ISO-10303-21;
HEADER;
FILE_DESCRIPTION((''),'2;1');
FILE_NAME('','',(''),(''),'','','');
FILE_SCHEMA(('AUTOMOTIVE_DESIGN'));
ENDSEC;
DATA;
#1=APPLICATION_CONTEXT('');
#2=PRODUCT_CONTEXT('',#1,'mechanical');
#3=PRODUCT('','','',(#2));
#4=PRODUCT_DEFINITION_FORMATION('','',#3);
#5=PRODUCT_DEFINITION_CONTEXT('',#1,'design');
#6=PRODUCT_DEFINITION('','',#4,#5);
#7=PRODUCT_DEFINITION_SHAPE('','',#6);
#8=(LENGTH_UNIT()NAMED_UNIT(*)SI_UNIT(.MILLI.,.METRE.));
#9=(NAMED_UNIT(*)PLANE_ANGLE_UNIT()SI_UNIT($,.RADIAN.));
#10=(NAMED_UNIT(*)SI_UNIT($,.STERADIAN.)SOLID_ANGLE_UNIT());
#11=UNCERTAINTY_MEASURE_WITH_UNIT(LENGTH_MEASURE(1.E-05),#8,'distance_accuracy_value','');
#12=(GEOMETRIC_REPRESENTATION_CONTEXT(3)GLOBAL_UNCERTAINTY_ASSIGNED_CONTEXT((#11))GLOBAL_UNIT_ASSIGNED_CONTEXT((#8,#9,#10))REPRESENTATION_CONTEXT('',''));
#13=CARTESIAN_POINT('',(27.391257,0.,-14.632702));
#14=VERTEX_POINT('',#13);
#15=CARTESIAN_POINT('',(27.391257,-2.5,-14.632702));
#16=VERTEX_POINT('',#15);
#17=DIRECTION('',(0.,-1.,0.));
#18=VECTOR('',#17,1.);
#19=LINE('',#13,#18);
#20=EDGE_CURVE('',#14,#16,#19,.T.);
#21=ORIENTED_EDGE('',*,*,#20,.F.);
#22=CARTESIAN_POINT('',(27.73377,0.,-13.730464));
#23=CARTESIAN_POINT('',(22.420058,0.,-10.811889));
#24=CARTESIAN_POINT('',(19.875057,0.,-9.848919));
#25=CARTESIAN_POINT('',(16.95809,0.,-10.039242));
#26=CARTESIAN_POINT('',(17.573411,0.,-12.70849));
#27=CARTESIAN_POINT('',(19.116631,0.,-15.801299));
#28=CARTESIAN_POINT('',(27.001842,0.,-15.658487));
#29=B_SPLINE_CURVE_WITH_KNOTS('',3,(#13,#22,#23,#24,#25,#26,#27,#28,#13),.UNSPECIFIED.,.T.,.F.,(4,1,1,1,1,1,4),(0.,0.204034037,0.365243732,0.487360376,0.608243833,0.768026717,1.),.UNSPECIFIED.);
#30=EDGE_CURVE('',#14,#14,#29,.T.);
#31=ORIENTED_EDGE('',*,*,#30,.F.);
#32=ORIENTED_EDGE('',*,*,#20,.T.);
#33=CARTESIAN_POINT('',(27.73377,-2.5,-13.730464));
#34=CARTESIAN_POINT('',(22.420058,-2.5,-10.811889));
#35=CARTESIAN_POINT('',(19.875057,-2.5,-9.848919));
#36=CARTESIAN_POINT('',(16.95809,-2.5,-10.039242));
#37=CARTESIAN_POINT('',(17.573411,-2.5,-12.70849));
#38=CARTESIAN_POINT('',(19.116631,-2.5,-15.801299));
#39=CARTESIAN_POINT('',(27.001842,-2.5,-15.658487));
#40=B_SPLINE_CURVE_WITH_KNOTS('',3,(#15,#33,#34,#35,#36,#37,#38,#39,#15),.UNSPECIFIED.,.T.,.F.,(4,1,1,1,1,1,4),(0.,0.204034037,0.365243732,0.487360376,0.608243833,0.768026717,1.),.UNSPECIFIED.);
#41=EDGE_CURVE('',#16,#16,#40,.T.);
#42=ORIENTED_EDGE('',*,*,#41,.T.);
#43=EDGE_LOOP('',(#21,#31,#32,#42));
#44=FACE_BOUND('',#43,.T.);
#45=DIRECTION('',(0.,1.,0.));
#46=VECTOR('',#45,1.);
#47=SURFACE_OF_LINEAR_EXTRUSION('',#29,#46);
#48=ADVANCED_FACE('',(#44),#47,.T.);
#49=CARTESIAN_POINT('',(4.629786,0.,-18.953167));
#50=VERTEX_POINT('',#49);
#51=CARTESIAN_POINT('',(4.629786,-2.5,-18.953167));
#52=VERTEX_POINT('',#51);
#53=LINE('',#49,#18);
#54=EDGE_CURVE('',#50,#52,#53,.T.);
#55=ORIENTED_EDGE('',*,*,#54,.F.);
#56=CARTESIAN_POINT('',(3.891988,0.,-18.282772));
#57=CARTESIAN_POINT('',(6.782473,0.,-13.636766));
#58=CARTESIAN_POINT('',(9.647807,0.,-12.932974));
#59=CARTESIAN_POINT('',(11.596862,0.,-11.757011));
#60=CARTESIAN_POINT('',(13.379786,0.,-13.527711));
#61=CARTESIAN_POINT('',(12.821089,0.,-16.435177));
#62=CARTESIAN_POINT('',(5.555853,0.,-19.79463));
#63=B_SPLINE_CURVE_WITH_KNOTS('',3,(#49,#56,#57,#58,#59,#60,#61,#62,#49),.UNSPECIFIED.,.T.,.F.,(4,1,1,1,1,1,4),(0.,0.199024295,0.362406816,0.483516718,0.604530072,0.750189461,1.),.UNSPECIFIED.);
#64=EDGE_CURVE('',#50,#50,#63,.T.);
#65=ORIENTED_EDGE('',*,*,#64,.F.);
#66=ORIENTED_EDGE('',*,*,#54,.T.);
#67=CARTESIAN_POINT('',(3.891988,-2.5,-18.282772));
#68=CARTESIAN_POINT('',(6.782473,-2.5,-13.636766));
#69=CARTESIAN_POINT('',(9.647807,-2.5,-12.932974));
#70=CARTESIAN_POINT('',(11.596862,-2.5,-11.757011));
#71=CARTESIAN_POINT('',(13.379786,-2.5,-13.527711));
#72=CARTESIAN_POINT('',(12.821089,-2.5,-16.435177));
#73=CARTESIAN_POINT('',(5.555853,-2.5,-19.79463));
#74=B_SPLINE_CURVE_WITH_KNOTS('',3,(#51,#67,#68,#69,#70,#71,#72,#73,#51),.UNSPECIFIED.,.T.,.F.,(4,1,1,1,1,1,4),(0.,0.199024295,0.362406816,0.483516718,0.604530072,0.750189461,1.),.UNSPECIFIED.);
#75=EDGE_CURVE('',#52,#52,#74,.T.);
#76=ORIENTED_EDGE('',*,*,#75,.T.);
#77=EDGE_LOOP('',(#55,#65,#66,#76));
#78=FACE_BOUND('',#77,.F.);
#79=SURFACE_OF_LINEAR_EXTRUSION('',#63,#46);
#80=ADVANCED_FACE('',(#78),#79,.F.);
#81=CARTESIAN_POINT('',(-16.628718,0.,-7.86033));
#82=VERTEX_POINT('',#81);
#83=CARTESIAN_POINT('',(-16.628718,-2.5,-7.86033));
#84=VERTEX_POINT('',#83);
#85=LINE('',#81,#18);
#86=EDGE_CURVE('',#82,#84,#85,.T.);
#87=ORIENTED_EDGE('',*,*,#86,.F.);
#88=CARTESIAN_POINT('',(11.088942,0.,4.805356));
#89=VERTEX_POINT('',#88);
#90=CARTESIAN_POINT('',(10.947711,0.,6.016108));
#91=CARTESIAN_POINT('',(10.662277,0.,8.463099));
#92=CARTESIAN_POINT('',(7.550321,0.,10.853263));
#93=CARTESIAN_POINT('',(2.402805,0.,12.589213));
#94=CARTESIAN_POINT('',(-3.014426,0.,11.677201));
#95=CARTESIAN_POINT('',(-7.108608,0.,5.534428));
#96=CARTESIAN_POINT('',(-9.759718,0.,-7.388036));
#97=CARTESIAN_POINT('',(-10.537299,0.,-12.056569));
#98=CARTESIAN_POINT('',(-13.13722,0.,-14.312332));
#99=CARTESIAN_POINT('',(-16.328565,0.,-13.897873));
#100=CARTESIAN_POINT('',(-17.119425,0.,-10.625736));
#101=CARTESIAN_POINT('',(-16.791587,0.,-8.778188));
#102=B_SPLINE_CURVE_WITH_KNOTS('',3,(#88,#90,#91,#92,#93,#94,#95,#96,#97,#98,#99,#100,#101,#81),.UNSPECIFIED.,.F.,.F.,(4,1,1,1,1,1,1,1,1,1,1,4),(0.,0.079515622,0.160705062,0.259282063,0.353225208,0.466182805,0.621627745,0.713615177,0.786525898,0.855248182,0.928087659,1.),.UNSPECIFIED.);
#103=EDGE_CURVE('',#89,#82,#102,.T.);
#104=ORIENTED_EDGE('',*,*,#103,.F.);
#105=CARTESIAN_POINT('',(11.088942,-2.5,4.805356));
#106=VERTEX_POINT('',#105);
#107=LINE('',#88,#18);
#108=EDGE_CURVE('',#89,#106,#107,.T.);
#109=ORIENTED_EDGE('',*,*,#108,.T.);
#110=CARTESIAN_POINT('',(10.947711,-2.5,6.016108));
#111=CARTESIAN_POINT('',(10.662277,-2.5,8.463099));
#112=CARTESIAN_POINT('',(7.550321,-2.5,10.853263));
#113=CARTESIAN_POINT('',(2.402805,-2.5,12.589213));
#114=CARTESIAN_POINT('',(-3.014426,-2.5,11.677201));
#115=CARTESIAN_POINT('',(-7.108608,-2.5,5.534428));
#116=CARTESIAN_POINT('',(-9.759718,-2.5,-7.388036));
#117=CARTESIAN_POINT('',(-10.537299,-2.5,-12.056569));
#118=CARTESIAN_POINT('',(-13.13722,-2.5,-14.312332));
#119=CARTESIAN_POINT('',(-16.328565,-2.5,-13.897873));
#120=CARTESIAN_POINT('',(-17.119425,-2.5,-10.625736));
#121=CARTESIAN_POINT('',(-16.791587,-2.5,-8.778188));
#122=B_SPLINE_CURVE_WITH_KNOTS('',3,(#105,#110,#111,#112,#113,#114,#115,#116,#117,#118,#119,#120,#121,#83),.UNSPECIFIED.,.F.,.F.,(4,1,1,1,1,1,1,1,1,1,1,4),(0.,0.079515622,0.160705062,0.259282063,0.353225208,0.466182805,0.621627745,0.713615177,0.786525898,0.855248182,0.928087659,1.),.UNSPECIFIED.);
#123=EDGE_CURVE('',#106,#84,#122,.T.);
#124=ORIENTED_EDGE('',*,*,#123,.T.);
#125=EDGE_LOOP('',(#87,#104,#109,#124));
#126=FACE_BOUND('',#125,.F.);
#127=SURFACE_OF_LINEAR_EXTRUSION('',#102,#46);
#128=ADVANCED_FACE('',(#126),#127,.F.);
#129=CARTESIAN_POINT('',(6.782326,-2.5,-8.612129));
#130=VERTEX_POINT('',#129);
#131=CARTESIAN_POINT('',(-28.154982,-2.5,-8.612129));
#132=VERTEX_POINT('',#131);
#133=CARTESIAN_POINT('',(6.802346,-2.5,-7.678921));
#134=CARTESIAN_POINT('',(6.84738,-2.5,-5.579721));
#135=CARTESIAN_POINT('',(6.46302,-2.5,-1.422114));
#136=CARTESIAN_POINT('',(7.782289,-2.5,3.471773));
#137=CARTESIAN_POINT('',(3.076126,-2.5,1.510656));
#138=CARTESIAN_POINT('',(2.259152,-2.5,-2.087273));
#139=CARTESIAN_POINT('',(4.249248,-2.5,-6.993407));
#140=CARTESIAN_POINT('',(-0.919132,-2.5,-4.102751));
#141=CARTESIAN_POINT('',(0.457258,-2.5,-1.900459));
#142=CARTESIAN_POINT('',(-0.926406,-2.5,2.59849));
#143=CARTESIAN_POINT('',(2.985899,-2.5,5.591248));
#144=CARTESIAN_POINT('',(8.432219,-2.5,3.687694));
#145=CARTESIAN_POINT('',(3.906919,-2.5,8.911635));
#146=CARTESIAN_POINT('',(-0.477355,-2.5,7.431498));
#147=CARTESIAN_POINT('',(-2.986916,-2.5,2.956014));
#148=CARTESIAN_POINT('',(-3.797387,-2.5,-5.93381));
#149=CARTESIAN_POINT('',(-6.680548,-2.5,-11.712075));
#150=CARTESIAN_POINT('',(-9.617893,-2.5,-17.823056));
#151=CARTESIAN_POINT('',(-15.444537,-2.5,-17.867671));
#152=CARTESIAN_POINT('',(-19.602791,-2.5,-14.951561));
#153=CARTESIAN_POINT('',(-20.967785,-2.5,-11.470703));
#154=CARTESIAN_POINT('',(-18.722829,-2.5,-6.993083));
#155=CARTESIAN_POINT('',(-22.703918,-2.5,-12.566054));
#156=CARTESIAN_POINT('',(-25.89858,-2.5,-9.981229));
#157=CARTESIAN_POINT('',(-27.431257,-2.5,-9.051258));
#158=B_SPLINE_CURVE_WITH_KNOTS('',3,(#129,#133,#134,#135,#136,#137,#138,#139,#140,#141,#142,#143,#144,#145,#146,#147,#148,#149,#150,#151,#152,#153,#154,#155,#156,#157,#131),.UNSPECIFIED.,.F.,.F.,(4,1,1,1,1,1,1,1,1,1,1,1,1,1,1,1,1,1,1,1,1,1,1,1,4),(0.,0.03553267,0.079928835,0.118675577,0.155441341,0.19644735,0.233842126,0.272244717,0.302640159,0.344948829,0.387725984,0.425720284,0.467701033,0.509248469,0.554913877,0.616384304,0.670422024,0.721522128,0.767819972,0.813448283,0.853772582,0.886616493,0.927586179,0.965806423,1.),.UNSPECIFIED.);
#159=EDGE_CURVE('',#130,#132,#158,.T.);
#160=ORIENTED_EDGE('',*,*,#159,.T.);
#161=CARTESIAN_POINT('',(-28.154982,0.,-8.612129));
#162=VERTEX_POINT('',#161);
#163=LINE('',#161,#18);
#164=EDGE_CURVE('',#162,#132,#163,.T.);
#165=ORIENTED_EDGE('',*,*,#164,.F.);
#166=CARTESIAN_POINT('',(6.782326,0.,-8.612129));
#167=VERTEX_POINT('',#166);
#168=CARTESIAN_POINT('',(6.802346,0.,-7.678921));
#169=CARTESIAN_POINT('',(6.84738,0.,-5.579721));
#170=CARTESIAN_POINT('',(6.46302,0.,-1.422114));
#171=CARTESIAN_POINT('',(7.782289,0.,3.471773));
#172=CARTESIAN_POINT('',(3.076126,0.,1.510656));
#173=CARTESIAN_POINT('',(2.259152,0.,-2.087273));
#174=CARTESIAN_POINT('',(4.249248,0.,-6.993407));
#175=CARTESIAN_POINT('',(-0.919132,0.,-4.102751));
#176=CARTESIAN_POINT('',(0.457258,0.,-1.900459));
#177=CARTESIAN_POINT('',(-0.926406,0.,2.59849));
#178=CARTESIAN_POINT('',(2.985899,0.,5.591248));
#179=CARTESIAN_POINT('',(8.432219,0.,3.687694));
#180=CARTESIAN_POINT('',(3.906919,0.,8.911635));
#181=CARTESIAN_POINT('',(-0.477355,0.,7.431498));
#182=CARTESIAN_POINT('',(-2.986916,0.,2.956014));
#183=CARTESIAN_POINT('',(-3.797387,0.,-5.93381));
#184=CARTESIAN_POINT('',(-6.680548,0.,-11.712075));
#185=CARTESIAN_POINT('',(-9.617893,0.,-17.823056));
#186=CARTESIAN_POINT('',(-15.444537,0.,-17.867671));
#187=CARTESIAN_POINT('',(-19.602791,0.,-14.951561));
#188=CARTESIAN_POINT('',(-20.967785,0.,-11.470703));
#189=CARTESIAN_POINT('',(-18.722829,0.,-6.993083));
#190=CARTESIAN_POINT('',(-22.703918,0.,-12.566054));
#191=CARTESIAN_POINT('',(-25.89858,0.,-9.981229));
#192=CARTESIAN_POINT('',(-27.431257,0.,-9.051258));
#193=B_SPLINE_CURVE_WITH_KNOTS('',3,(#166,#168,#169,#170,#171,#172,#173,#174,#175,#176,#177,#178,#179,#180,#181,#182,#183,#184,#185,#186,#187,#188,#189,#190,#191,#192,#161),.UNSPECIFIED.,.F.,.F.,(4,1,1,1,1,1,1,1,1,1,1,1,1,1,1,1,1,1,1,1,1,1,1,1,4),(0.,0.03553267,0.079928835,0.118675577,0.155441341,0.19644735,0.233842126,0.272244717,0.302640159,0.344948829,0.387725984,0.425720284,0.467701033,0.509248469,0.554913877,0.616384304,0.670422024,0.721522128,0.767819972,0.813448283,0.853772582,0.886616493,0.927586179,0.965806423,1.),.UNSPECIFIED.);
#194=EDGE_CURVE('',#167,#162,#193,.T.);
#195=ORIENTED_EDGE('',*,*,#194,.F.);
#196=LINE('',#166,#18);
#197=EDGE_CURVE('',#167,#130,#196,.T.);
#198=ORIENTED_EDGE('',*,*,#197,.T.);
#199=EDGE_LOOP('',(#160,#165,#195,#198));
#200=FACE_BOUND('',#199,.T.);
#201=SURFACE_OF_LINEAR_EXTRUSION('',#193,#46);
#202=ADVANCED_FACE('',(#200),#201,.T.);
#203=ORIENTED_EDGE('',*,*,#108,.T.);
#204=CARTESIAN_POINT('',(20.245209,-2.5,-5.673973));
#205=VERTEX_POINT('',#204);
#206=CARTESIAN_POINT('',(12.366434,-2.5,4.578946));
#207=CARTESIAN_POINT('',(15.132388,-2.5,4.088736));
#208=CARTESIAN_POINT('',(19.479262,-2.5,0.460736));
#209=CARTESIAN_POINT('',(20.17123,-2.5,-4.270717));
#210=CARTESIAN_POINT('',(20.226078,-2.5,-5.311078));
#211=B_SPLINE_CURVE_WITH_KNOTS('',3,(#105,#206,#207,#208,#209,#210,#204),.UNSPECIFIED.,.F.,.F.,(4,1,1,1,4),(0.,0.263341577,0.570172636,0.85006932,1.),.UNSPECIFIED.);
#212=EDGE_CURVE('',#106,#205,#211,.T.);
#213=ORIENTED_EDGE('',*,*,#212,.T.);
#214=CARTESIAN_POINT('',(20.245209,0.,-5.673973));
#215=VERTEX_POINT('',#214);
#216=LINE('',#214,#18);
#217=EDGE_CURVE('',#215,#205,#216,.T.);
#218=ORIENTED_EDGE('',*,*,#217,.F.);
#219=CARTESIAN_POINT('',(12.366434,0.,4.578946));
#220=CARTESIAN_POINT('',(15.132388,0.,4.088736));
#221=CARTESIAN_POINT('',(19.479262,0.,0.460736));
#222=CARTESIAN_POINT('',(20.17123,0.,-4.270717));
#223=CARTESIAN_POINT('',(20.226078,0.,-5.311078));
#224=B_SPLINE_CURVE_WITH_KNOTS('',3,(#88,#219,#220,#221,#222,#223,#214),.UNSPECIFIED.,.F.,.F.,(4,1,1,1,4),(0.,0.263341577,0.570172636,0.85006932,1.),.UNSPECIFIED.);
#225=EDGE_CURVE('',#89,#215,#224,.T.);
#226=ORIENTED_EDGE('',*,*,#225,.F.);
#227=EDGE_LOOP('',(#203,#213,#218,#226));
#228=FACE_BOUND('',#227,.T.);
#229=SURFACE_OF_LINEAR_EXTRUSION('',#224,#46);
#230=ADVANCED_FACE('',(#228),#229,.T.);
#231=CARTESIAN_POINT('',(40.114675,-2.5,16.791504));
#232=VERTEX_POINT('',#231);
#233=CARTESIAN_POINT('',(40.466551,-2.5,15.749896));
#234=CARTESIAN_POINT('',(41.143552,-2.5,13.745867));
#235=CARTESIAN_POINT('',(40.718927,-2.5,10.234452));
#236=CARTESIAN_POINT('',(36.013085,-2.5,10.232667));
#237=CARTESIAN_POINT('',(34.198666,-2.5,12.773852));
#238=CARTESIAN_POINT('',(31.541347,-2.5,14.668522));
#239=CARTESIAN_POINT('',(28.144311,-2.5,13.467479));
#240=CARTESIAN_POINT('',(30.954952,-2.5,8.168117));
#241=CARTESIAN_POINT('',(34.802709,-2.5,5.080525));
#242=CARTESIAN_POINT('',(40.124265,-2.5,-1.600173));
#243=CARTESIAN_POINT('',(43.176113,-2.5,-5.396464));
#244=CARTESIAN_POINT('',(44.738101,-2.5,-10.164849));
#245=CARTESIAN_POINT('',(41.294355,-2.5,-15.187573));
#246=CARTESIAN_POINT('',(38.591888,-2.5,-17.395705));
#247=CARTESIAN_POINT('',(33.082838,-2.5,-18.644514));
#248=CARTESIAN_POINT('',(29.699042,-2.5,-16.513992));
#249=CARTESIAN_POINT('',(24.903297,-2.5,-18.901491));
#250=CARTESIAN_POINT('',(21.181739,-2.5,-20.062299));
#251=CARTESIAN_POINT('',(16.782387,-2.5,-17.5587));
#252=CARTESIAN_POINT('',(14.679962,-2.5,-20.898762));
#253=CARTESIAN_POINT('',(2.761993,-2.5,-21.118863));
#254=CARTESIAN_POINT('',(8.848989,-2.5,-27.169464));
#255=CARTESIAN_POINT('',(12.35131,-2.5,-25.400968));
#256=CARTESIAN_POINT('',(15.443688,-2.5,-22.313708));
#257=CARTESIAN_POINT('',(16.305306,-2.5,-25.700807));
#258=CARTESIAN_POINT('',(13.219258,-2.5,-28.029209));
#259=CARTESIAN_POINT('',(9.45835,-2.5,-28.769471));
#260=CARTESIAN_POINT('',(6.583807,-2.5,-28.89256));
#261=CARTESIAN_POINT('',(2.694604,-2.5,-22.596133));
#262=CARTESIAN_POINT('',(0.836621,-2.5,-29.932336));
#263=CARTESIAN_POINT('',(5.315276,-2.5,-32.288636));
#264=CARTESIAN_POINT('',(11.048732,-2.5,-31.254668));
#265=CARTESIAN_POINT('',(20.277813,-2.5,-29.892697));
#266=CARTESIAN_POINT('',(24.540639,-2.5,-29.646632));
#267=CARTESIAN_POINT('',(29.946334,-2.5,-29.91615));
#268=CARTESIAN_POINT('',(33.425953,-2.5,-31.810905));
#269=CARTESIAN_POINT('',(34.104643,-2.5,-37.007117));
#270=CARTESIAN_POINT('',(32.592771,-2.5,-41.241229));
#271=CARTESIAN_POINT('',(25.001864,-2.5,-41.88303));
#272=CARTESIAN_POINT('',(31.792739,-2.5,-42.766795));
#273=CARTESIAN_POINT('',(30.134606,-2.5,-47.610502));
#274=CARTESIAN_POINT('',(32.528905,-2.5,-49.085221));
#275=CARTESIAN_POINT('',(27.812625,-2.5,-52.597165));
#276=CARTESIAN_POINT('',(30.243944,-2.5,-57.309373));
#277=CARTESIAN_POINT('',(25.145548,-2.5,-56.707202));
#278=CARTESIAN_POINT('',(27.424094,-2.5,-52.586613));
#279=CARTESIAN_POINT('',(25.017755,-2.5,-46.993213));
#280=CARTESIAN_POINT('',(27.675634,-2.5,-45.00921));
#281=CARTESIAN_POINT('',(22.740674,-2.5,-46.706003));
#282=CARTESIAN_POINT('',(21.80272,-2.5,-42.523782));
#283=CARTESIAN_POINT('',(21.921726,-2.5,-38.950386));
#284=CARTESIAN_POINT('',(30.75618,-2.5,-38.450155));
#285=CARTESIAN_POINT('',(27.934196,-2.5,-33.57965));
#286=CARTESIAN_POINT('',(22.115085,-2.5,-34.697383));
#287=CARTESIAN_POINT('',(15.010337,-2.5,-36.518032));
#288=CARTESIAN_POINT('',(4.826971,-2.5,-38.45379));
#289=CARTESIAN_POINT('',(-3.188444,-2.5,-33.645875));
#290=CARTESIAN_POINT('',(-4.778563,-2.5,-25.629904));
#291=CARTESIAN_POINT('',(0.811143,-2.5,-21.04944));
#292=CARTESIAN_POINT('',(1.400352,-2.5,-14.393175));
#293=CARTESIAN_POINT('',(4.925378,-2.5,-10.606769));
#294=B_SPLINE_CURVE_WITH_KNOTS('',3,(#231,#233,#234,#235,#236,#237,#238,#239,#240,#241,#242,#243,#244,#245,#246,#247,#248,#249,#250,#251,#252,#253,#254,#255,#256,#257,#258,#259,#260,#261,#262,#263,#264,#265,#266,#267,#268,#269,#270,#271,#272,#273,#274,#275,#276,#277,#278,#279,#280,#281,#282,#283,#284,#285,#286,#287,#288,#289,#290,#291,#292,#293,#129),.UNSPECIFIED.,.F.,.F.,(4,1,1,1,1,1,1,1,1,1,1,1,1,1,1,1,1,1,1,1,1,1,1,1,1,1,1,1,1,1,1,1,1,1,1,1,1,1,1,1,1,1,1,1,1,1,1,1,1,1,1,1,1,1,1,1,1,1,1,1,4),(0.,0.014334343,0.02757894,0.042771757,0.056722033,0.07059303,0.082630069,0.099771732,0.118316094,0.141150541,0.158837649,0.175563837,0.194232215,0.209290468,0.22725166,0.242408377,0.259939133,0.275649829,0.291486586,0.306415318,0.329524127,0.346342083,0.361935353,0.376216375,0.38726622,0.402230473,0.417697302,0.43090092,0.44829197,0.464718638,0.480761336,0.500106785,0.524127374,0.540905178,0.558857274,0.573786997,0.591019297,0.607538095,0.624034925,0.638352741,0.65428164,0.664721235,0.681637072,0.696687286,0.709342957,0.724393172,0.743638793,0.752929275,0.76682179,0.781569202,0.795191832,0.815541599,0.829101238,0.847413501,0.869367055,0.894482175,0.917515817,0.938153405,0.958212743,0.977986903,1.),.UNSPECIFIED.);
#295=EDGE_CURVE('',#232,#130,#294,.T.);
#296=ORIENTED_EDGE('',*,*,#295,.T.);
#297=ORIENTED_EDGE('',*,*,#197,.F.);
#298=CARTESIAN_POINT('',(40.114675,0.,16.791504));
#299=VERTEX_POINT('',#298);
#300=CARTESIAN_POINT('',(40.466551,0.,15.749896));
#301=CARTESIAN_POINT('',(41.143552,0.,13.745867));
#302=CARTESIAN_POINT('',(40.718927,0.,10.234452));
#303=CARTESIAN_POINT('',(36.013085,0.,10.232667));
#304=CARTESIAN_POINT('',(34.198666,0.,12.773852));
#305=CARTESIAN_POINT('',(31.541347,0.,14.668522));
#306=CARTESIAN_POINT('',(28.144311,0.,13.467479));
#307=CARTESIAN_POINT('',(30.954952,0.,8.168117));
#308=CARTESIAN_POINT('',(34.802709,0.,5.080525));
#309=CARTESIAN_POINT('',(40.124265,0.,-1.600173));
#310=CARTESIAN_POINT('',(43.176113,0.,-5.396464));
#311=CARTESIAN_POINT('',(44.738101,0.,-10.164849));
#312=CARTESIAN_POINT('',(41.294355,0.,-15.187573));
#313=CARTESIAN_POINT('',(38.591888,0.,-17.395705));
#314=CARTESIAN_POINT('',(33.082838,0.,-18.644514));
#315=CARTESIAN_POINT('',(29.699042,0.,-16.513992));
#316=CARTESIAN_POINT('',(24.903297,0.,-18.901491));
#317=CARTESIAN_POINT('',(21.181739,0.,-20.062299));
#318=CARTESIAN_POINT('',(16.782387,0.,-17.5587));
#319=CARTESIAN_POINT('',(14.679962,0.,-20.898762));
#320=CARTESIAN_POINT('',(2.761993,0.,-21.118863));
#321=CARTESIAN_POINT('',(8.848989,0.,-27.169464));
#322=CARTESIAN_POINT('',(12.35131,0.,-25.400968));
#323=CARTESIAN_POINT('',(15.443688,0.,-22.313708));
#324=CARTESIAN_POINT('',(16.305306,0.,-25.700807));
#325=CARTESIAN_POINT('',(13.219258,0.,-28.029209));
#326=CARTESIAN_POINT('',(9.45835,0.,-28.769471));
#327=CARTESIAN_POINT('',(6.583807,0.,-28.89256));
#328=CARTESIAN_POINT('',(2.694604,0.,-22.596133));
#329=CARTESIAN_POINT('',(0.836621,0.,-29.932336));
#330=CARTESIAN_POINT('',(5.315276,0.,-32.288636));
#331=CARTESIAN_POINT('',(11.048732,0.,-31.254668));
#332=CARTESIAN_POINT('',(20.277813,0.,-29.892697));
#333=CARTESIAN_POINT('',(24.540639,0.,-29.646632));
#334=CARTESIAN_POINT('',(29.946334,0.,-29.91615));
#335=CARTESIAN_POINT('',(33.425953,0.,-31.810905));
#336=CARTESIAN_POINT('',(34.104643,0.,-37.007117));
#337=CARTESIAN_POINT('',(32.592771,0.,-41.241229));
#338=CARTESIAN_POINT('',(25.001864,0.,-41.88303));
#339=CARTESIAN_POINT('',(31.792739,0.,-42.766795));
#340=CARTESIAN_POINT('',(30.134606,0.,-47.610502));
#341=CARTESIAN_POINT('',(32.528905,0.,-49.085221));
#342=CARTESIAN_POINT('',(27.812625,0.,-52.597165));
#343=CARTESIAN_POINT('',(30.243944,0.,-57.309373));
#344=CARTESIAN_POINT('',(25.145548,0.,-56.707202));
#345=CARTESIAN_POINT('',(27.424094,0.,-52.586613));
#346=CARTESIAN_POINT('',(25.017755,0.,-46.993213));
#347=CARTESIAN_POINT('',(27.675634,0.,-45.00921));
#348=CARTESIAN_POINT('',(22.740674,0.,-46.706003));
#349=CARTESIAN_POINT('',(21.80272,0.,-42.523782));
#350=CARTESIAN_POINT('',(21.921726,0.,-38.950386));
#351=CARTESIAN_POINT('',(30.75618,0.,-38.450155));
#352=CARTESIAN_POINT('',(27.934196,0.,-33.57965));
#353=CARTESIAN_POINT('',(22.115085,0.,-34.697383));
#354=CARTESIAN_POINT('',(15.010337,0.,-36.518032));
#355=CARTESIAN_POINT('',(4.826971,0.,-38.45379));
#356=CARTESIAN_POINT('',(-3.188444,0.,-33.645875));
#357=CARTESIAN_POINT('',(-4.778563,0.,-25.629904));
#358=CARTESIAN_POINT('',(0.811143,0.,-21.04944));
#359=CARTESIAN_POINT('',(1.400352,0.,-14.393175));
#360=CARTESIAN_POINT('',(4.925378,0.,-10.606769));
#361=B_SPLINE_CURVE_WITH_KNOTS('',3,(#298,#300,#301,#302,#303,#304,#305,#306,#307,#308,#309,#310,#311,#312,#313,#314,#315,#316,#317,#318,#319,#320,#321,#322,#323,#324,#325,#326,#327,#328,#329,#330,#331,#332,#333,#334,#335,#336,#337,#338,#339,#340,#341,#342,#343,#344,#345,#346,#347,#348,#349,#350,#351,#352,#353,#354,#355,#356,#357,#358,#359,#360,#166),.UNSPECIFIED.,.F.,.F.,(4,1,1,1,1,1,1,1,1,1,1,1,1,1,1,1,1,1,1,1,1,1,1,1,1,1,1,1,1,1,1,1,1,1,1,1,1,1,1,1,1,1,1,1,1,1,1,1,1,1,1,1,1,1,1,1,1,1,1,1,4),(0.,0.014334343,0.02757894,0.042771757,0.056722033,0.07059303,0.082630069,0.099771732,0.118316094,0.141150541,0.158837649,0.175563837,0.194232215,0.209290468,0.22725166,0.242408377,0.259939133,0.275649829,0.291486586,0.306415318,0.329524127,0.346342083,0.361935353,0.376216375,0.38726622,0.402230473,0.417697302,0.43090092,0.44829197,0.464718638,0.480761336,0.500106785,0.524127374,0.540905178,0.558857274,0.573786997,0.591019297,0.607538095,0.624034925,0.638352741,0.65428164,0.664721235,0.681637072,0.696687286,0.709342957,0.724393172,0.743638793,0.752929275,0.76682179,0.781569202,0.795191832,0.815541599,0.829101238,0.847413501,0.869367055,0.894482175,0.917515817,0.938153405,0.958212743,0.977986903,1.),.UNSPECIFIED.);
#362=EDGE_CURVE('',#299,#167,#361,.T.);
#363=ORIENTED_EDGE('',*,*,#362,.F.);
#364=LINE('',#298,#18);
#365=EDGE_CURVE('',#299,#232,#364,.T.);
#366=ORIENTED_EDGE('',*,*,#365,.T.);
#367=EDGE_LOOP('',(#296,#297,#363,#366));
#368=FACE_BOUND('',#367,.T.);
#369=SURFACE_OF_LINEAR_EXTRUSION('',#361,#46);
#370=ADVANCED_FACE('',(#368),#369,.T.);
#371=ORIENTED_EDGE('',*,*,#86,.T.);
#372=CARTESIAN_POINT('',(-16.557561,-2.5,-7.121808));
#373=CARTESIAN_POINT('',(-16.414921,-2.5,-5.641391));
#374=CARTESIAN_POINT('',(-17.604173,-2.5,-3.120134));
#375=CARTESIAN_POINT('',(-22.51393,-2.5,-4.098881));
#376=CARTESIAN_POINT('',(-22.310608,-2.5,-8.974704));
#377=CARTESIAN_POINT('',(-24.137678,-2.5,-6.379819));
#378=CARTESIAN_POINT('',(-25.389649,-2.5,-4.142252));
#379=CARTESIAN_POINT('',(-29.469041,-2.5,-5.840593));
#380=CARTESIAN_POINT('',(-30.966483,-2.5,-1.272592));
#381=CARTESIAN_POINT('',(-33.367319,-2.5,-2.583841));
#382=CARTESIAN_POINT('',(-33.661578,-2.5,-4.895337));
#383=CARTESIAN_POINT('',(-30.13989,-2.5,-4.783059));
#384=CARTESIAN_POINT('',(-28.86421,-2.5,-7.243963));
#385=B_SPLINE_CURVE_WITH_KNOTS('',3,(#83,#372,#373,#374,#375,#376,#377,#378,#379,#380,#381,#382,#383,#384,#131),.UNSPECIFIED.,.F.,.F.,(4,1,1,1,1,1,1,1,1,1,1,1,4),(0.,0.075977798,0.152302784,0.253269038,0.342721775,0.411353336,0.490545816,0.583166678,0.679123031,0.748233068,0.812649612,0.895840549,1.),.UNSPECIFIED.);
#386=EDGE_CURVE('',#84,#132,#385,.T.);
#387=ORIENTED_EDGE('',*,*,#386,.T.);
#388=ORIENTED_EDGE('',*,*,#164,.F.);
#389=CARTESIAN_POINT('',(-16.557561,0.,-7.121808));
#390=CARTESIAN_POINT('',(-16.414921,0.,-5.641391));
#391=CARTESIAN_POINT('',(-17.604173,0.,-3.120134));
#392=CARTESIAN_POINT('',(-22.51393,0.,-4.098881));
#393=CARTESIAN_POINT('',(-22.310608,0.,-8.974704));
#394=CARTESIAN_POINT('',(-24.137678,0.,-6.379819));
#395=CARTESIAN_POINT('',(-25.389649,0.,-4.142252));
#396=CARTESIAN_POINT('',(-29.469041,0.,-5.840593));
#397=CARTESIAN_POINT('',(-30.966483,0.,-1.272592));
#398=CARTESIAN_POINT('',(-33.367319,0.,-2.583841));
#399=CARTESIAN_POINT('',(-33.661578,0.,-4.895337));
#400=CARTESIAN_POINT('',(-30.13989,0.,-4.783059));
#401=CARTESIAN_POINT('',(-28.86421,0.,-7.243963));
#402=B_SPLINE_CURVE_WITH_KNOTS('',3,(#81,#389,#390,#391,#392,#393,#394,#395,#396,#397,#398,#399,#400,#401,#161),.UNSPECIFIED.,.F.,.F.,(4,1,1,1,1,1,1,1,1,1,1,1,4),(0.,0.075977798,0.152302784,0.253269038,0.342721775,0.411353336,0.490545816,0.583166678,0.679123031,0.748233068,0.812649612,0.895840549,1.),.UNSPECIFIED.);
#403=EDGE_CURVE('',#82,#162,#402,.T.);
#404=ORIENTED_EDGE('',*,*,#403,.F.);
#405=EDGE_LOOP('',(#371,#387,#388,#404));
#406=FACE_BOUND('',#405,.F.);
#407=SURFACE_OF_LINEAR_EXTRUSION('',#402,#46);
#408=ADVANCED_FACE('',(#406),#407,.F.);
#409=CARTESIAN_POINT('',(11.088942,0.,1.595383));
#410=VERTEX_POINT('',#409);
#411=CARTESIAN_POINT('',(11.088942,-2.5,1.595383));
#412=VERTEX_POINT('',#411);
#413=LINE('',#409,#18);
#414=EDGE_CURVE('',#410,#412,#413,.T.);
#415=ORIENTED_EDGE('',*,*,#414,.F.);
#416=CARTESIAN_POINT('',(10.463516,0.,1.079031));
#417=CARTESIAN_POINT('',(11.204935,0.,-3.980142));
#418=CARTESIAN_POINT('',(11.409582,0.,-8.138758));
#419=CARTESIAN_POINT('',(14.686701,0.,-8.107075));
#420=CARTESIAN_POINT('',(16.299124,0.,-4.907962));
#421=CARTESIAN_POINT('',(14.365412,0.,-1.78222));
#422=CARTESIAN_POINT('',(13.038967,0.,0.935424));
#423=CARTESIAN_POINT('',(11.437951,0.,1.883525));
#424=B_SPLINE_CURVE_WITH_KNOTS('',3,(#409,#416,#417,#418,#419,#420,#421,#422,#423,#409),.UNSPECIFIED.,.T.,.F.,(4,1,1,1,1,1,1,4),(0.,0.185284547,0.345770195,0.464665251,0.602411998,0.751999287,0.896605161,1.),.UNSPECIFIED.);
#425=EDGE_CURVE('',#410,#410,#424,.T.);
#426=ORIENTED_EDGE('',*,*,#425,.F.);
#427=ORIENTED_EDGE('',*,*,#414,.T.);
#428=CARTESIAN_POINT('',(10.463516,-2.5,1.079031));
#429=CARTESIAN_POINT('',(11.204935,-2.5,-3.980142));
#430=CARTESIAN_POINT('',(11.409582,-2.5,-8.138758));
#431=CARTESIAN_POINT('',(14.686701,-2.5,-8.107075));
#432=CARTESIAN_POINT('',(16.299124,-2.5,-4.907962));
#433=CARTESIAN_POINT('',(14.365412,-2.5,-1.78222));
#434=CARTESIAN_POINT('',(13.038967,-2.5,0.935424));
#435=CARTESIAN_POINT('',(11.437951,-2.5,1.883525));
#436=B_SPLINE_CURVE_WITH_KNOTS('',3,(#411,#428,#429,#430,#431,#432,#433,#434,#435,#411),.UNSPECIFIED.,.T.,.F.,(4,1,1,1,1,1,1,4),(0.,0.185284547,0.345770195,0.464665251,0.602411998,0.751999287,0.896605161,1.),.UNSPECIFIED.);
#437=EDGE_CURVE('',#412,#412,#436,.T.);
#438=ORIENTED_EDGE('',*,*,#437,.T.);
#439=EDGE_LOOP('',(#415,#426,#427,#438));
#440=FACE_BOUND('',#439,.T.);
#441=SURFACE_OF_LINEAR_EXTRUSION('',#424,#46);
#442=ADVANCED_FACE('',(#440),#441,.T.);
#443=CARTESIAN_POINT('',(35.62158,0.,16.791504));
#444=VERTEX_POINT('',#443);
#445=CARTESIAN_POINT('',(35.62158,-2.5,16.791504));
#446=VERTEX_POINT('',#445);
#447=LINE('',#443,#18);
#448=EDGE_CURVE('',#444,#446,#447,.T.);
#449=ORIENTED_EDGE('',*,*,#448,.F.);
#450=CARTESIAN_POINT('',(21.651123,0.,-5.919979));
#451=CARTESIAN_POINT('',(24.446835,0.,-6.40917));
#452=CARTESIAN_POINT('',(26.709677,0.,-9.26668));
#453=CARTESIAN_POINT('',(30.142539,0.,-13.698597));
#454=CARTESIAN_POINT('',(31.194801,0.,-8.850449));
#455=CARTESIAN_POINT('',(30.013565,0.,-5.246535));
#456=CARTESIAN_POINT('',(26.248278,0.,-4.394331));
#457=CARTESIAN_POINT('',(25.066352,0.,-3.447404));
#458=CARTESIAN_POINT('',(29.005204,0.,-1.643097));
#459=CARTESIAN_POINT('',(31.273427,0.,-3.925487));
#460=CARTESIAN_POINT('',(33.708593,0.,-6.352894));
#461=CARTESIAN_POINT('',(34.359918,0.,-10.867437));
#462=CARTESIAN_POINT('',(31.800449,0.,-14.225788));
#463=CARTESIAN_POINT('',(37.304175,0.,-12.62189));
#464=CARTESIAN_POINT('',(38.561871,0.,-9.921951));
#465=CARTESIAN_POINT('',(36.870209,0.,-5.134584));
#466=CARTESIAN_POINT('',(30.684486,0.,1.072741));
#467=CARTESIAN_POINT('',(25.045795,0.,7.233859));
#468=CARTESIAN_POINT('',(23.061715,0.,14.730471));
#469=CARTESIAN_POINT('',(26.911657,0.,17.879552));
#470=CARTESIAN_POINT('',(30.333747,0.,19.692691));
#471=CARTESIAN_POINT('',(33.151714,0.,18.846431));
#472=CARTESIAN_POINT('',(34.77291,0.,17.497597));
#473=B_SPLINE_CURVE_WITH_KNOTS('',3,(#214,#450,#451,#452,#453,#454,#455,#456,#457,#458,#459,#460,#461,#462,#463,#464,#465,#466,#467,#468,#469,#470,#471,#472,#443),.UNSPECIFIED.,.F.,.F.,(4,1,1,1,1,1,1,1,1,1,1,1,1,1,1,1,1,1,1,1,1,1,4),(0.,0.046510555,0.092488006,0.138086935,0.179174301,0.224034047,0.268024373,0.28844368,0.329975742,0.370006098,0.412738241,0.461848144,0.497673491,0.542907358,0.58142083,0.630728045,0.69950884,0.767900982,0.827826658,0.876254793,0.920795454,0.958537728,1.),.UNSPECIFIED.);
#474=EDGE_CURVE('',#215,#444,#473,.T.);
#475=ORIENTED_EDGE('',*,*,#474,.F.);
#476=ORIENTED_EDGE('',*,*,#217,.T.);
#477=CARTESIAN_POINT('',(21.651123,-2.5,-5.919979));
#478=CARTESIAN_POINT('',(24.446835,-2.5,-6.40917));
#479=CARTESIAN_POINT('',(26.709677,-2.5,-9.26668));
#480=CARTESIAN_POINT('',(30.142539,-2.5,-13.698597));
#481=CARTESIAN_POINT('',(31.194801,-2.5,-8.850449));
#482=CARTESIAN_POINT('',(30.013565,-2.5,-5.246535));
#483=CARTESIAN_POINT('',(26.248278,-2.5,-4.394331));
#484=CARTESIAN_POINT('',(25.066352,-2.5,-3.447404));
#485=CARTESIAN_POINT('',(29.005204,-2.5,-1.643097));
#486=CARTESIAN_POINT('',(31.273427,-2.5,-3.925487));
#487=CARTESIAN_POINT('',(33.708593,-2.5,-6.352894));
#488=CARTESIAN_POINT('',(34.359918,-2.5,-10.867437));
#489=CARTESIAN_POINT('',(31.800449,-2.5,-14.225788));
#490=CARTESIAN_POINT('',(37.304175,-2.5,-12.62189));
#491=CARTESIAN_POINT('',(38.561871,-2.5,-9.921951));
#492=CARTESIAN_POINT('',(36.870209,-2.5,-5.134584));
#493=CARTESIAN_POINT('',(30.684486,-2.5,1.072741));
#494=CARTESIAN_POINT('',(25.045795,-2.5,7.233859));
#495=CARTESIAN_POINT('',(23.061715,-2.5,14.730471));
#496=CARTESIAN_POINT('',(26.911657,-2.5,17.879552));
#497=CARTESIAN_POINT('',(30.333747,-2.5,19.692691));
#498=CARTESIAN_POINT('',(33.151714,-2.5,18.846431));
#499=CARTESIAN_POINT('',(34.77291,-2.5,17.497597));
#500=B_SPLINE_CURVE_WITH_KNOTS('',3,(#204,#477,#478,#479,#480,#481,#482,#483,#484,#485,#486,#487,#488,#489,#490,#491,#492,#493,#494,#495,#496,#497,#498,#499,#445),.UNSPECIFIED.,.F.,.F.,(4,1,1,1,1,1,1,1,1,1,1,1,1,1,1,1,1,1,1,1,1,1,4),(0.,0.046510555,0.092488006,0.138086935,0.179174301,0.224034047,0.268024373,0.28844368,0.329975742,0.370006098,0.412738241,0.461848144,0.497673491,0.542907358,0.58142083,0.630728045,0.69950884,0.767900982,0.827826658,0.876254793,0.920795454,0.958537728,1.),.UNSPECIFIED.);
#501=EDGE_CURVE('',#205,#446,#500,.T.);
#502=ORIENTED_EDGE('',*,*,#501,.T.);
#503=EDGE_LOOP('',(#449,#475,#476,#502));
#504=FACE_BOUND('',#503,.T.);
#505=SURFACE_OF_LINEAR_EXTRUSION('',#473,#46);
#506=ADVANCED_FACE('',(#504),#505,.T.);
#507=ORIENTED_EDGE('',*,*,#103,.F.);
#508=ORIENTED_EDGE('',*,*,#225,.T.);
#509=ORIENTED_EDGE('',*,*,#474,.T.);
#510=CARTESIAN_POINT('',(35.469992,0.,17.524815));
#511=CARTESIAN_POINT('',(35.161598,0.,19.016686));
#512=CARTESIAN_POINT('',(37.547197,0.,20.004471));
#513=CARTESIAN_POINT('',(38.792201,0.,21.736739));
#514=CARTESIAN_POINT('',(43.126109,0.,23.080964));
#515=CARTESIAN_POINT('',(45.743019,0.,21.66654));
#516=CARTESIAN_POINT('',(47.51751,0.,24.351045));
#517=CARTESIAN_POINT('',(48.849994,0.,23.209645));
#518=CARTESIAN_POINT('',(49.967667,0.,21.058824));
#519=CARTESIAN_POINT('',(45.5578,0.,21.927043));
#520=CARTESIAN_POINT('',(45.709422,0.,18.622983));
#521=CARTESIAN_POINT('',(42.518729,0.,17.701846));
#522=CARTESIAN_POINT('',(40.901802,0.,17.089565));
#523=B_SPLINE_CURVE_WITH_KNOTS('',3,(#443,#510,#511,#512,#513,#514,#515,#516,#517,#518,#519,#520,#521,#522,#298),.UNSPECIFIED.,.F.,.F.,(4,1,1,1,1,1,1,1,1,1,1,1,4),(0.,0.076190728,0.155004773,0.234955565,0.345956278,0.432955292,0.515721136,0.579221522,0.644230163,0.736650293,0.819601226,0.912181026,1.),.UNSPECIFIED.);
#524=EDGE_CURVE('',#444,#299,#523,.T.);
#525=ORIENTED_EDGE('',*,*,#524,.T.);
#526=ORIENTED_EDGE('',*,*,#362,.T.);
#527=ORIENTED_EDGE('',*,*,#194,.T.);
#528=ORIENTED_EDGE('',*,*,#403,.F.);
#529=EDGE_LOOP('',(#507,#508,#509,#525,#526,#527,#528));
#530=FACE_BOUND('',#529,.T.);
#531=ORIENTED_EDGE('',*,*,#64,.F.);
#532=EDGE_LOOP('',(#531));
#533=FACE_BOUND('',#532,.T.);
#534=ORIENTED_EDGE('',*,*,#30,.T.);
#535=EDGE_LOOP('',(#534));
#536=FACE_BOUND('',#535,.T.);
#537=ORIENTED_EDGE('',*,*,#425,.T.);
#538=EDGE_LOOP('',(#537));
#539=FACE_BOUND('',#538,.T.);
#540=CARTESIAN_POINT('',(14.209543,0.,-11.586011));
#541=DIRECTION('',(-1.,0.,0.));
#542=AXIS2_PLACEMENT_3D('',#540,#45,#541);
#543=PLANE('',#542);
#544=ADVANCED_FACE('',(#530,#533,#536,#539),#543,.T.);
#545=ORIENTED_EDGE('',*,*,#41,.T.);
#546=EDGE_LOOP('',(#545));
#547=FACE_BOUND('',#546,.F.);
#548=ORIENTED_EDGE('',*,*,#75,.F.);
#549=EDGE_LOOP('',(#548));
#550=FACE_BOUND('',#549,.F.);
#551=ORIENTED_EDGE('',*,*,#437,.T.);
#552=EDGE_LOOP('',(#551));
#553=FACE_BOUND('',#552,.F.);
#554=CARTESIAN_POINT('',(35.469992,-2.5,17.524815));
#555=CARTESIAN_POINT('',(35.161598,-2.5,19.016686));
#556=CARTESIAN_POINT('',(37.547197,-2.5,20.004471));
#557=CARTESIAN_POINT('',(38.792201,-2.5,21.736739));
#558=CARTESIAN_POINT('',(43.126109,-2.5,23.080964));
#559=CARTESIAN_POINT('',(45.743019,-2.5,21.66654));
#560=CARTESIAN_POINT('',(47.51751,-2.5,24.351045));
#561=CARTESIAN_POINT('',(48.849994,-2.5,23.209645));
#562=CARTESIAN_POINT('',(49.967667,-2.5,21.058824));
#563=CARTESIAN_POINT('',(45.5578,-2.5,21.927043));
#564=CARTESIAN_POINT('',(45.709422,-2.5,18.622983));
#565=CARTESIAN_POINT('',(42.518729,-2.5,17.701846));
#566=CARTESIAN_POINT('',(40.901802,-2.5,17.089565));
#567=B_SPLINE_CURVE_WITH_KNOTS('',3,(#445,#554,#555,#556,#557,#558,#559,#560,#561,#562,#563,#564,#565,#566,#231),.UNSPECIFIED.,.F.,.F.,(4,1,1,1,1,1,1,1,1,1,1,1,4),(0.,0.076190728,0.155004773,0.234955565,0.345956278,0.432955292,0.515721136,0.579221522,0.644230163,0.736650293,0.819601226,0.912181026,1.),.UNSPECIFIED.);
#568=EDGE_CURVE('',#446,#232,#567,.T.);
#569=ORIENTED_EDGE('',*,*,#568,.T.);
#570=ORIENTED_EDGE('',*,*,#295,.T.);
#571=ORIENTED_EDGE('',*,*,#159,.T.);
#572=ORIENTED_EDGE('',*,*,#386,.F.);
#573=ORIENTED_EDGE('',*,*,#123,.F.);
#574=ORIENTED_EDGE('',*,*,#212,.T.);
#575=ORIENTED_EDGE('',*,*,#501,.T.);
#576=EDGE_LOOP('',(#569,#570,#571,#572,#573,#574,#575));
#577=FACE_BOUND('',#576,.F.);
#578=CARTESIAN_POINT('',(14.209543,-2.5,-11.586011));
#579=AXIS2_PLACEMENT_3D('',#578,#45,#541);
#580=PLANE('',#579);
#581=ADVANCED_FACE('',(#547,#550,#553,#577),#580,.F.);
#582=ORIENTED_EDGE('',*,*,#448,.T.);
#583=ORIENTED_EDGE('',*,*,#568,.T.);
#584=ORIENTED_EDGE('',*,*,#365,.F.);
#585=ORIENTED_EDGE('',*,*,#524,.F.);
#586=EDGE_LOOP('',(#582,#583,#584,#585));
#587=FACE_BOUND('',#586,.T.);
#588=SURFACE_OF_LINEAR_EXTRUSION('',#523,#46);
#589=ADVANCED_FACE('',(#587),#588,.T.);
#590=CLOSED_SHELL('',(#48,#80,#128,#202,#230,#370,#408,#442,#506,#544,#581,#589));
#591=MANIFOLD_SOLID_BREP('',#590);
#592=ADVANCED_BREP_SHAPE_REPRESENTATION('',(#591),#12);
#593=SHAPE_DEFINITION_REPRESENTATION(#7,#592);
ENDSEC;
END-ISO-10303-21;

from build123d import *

# Parameters (mm, degrees)
F1_DEPTH = 2.5


with BuildPart() as f1:
    # F0 (on Front) → F1 (new body)
    with BuildSketch(Plane.XZ):
        with BuildLine():
            add(Edge.make_bspline(
                [(11.0889421776, 4.8053557985), (12.3664336611, 4.5789460208), (15.1323876511, 4.0887360773), (19.4792620619, 0.4607355169), (20.1712301772, -4.2707165664), (20.2260776558, -5.3110784429), (20.2452093363, -5.6739733554)],
                knots=[0, 0, 0, 0, 0.2633415775, 0.5701726363, 0.85006932, 1, 1, 1, 1], degree=3))
            add(Edge.make_bspline(
                [(11.0889421776, 4.8053557985), (10.9477114895, 6.0161080856), (10.6622771824, 8.4630992095), (7.5503208691, 10.8532625541), (2.4028051008, 12.5892131079), (-3.0144256065, 11.6772013784), (-7.1086081438, 5.5344278812), (-9.759717957, -7.3880363716), (-10.5372986967, -12.0565687383), (-13.1372199176, -14.3123320751), (-16.3285648842, -13.8978725755), (-17.1194246281, -10.625736306), (-16.7915869436, -8.7781875333), (-16.6287180036, -7.8603299335)],
                knots=[0, 0, 0, 0, 0.0795156219, 0.1607050617, 0.259282063, 0.3532252078, 0.4661828047, 0.6216277449, 0.7136151768, 0.7865258985, 0.8552481816, 0.9280876594, 1, 1, 1, 1], degree=3))
            add(Edge.make_bspline(
                [(-16.6287180036, -7.8603299335), (-16.5575606891, -7.1218084113), (-16.4149208991, -5.641390615), (-17.6041733535, -3.1201341795), (-22.513929949, -4.0988811412), (-22.3106075687, -8.9747043691), (-24.1376775807, -6.3798194605), (-25.389649227, -4.1422524297), (-29.4690409033, -5.8405928958), (-30.9664831344, -1.2725924402), (-33.3673187941, -2.583840604), (-33.6615781217, -4.8953370561), (-30.1398896289, -4.7830591729), (-28.8642099879, -7.243963074), (-28.1549822539, -8.612128906)],
                knots=[0, 0, 0, 0, 0.0759777977, 0.1523027839, 0.2532690375, 0.3427217753, 0.4113533356, 0.4905458161, 0.5831666784, 0.6791230306, 0.7482330679, 0.8126496123, 0.8958405491, 1, 1, 1, 1], degree=3))
            add(Edge.make_bspline(
                [(6.7823263817, -8.612128906), (6.8023463174, -7.6789212934), (6.8473800891, -5.5797208158), (6.4630197472, -1.4221142412), (7.7822890094, 3.471772956), (3.0761255876, 1.5106559717), (2.2591516242, -2.0872726175), (4.2492475431, -6.9934071521), (-0.9191321523, -4.1027508056), (0.4572576605, -1.9004592961), (-0.9264058685, 2.5984899734), (2.9858987401, 5.5912476588), (8.4322187338, 3.6876943929), (3.9069192717, 8.9116353995), (-0.4773551425, 7.4314984902), (-2.9869160352, 2.9560144756), (-3.7973868662, -5.9338096084), (-6.6805479463, -11.7120751903), (-9.6178927465, -17.8230555193), (-15.4445370698, -17.8676705477), (-19.6027912562, -14.9515606696), (-20.9677851586, -11.4707032937), (-18.7228290433, -6.9930832081), (-22.7039184604, -12.5660537681), (-25.8985798616, -9.9812289008), (-27.4312569811, -9.0512581458), (-28.1549822539, -8.612128906)],
                knots=[0, 0, 0, 0, 0.0355326697, 0.079928835, 0.1186755767, 0.1554413406, 0.1964473498, 0.2338421257, 0.2722447166, 0.3026401594, 0.3449488292, 0.3877259838, 0.4257202836, 0.4677010331, 0.5092484687, 0.554913877, 0.6163843036, 0.6704220242, 0.7215221279, 0.7678199717, 0.813448283, 0.8537725824, 0.8866164929, 0.9275861785, 0.9658064232, 1, 1, 1, 1], degree=3))
            add(Edge.make_bspline(
                [(40.1146747172, 16.7915038764), (40.4665507483, 15.7498959021), (41.1435519888, 13.745866561), (40.7189266585, 10.2344518158), (36.0130852525, 10.2326672231), (34.1986657339, 12.7738521997), (31.5413470961, 14.668522316), (28.1443108678, 13.4674789763), (30.9549521177, 8.1681167244), (34.8027089366, 5.0805254069), (40.124265207, -1.6001734888), (43.1761127371, -5.3964638729), (44.7381007749, -10.1648487415), (41.2943552054, -15.1875730535), (38.5918875439, -17.3957049024), (33.0828380013, -18.6445140842), (29.699042011, -16.5139924018), (24.9032970573, -18.9014914618), (21.1817394065, -20.0622987505), (16.7823866144, -17.5587003839), (14.6799623091, -20.8987623196), (2.7619930002, -21.1188631764), (8.8489886462, -27.1694642808), (12.3513095758, -25.4009682523), (15.4436882616, -22.3137079746), (16.3053064191, -25.7008071602), (13.2192577468, -28.0292088882), (9.4583495005, -28.7694708273), (6.5838065607, -28.8925602668), (2.694604328, -22.5961328405), (0.836620942, -29.9323358798), (5.315275849, -32.2886359905), (11.0487315026, -31.254668193), (20.2778131565, -29.8926966593), (24.5406386911, -29.6466323225), (29.9463342612, -29.9161495364), (33.4259529643, -31.8109051914), (34.1046432191, -37.0071173852), (32.5927705931, -41.2412291128), (25.0018643526, -41.8830302351), (31.7927394818, -42.766795317), (30.1346056521, -47.610502399), (32.5289051381, -49.0852212432), (27.8126248221, -52.5971654913), (30.243943881, -57.3093729522), (25.1455480434, -56.7072016872), (27.4240935302, -52.586613438), (25.0177552597, -46.9932134786), (27.6756341036, -45.0092103493), (22.7406737652, -46.7060028356), (21.8027202863, -42.5237815336), (21.9217264812, -38.9503862187), (30.7561795733, -38.4501545511), (27.9341960532, -33.5796496944), (22.1150849746, -34.697382944), (15.0103365649, -36.5180323369), (4.8269707459, -38.4537896904), (-3.1884442224, -33.6458748824), (-4.7785630469, -25.6299041474), (0.8111431792, -21.0494402895), (1.400351515, -14.3931754671), (4.9253784653, -10.6067689094), (6.7823263817, -8.612128906)],
                knots=[0, 0, 0, 0, 0.0143343431, 0.0275789403, 0.0427717568, 0.0567220329, 0.07059303, 0.0826300691, 0.099771732, 0.1183160944, 0.1411505414, 0.1588376485, 0.1755638368, 0.1942322152, 0.2092904681, 0.2272516601, 0.2424083772, 0.2599391332, 0.2756498287, 0.2914865856, 0.3064153176, 0.3295241271, 0.346342083, 0.3619353534, 0.3762163746, 0.3872662203, 0.4022304726, 0.4176973024, 0.4309009199, 0.4482919704, 0.4647186379, 0.4807613357, 0.5001067849, 0.5241273741, 0.5409051779, 0.5588572741, 0.5737869973, 0.5910192967, 0.6075380946, 0.6240349255, 0.6383527412, 0.65428164, 0.6647212347, 0.6816370716, 0.6966872857, 0.7093429575, 0.7243931718, 0.7436387934, 0.7529292754, 0.7668217904, 0.7815692023, 0.7951918317, 0.8155415987, 0.8291012376, 0.8474135009, 0.8693670546, 0.8944821747, 0.9175158167, 0.9381534048, 0.9582127435, 0.9779869034, 1, 1, 1, 1], degree=3))
            add(Edge.make_bspline(
                [(35.6215797365, 16.7915038764), (35.4699922434, 17.5248150308), (35.1615979616, 19.0166859113), (37.5471970561, 20.0044705983), (38.7922008862, 21.7367388394), (43.1261085049, 23.0809638555), (45.7430187509, 21.666539652), (47.5175099347, 24.3510448141), (48.8499940298, 23.209644854), (49.9676665537, 21.0588237026), (45.5578001356, 21.9270429172), (45.7094218616, 18.6229828126), (42.5187291989, 17.7018461176), (40.9018023392, 17.0895651429), (40.1146747172, 16.7915038764)],
                knots=[0, 0, 0, 0, 0.0761907285, 0.1550047733, 0.2349555648, 0.3459562777, 0.4329552921, 0.5157211357, 0.5792215223, 0.6442301631, 0.7366502925, 0.8196012258, 0.9121810258, 1, 1, 1, 1], degree=3))
            add(Edge.make_bspline(
                [(20.2452093363, -5.6739733554), (21.6511226884, -5.919978834), (24.4468348201, -6.4091700773), (26.7096769623, -9.2666795713), (30.1425392507, -13.6985972103), (31.1948008112, -8.8504492738), (30.0135648348, -5.2465348991), (26.2482784161, -4.3943314402), (25.0663521703, -3.4474039969), (29.0052041471, -1.6430971727), (31.273426782, -3.9254865804), (33.70859268, -6.3528940117), (34.3599178917, -10.8674365497), (31.8004493289, -14.225787817), (37.3041746939, -12.6218900027), (38.561871108, -9.9219512268), (36.8702090159, -5.134584014), (30.6844857187, 1.0727408413), (25.0457946051, 7.2338592725), (23.0617147536, 14.7304713584), (26.9116572333, 17.8795520359), (30.3337468395, 19.6926905477), (33.15171401, 18.8464314896), (34.7729102644, 17.4975966466), (35.6215797365, 16.7915038764)],
                knots=[0, 0, 0, 0, 0.0465105549, 0.0924880061, 0.1380869348, 0.1791743014, 0.2240340473, 0.2680243733, 0.2884436799, 0.3299757418, 0.3700060981, 0.4127382408, 0.4618481436, 0.4976734906, 0.5429073579, 0.5814208302, 0.6307280454, 0.6995088401, 0.7679009824, 0.827826658, 0.8762547925, 0.9207954542, 0.958537728, 1, 1, 1, 1], degree=3))
        make_face()
        with BuildLine():
            add(Edge.make_bspline(
                [(4.6297861263, -18.9531669021), (3.8919879115, -18.2827722332), (6.7824732199, -13.636765733), (9.6478068057, -12.9329740097), (11.5968616577, -11.7570107669), (13.379785524, -13.5277113185), (12.8210888596, -16.4351768322), (5.5558528159, -19.7946302714), (4.6297861263, -18.9531669021)],
                knots=[0, 0, 0, 0, 0.1990242948, 0.3624068162, 0.4835167179, 0.6045300721, 0.7501894608, 1, 1, 1, 1], degree=3))
        make_face(mode=Mode.SUBTRACT)
        with BuildLine():
            add(Edge.make_bspline(
                [(27.3912567645, -14.6327018738), (27.7337695891, -13.7304643049), (22.4200581125, -10.8118886708), (19.875056693, -9.848919268), (16.9580902342, -10.0392418511), (17.5734112898, -12.7084904983), (19.1166314264, -15.8012985206), (27.0018422056, -15.6584866614), (27.3912567645, -14.6327018738)],
                knots=[0, 0, 0, 0, 0.2040340369, 0.3652437321, 0.4873603759, 0.6082438326, 0.7680267166, 1, 1, 1, 1], degree=3))
        make_face(mode=Mode.SUBTRACT)
        with BuildLine():
            add(Edge.make_bspline(
                [(11.0889421776, 1.5953831607), (10.4635155898, 1.0790307729), (11.2049354821, -3.9801423175), (11.4095818962, -8.1387584169), (14.6867009262, -8.1070749026), (16.2991242757, -4.9079617981), (14.3654117825, -1.7822196639), (13.0389671009, 0.9354236274), (11.4379506775, 1.8835246882), (11.0889421776, 1.5953831607)],
                knots=[0, 0, 0, 0, 0.1852845465, 0.3457701949, 0.4646652511, 0.6024119976, 0.7519992867, 0.8966051605, 1, 1, 1, 1], degree=3))
        make_face(mode=Mode.SUBTRACT)
    extrude(amount=F1_DEPTH)


solid = f1.part
